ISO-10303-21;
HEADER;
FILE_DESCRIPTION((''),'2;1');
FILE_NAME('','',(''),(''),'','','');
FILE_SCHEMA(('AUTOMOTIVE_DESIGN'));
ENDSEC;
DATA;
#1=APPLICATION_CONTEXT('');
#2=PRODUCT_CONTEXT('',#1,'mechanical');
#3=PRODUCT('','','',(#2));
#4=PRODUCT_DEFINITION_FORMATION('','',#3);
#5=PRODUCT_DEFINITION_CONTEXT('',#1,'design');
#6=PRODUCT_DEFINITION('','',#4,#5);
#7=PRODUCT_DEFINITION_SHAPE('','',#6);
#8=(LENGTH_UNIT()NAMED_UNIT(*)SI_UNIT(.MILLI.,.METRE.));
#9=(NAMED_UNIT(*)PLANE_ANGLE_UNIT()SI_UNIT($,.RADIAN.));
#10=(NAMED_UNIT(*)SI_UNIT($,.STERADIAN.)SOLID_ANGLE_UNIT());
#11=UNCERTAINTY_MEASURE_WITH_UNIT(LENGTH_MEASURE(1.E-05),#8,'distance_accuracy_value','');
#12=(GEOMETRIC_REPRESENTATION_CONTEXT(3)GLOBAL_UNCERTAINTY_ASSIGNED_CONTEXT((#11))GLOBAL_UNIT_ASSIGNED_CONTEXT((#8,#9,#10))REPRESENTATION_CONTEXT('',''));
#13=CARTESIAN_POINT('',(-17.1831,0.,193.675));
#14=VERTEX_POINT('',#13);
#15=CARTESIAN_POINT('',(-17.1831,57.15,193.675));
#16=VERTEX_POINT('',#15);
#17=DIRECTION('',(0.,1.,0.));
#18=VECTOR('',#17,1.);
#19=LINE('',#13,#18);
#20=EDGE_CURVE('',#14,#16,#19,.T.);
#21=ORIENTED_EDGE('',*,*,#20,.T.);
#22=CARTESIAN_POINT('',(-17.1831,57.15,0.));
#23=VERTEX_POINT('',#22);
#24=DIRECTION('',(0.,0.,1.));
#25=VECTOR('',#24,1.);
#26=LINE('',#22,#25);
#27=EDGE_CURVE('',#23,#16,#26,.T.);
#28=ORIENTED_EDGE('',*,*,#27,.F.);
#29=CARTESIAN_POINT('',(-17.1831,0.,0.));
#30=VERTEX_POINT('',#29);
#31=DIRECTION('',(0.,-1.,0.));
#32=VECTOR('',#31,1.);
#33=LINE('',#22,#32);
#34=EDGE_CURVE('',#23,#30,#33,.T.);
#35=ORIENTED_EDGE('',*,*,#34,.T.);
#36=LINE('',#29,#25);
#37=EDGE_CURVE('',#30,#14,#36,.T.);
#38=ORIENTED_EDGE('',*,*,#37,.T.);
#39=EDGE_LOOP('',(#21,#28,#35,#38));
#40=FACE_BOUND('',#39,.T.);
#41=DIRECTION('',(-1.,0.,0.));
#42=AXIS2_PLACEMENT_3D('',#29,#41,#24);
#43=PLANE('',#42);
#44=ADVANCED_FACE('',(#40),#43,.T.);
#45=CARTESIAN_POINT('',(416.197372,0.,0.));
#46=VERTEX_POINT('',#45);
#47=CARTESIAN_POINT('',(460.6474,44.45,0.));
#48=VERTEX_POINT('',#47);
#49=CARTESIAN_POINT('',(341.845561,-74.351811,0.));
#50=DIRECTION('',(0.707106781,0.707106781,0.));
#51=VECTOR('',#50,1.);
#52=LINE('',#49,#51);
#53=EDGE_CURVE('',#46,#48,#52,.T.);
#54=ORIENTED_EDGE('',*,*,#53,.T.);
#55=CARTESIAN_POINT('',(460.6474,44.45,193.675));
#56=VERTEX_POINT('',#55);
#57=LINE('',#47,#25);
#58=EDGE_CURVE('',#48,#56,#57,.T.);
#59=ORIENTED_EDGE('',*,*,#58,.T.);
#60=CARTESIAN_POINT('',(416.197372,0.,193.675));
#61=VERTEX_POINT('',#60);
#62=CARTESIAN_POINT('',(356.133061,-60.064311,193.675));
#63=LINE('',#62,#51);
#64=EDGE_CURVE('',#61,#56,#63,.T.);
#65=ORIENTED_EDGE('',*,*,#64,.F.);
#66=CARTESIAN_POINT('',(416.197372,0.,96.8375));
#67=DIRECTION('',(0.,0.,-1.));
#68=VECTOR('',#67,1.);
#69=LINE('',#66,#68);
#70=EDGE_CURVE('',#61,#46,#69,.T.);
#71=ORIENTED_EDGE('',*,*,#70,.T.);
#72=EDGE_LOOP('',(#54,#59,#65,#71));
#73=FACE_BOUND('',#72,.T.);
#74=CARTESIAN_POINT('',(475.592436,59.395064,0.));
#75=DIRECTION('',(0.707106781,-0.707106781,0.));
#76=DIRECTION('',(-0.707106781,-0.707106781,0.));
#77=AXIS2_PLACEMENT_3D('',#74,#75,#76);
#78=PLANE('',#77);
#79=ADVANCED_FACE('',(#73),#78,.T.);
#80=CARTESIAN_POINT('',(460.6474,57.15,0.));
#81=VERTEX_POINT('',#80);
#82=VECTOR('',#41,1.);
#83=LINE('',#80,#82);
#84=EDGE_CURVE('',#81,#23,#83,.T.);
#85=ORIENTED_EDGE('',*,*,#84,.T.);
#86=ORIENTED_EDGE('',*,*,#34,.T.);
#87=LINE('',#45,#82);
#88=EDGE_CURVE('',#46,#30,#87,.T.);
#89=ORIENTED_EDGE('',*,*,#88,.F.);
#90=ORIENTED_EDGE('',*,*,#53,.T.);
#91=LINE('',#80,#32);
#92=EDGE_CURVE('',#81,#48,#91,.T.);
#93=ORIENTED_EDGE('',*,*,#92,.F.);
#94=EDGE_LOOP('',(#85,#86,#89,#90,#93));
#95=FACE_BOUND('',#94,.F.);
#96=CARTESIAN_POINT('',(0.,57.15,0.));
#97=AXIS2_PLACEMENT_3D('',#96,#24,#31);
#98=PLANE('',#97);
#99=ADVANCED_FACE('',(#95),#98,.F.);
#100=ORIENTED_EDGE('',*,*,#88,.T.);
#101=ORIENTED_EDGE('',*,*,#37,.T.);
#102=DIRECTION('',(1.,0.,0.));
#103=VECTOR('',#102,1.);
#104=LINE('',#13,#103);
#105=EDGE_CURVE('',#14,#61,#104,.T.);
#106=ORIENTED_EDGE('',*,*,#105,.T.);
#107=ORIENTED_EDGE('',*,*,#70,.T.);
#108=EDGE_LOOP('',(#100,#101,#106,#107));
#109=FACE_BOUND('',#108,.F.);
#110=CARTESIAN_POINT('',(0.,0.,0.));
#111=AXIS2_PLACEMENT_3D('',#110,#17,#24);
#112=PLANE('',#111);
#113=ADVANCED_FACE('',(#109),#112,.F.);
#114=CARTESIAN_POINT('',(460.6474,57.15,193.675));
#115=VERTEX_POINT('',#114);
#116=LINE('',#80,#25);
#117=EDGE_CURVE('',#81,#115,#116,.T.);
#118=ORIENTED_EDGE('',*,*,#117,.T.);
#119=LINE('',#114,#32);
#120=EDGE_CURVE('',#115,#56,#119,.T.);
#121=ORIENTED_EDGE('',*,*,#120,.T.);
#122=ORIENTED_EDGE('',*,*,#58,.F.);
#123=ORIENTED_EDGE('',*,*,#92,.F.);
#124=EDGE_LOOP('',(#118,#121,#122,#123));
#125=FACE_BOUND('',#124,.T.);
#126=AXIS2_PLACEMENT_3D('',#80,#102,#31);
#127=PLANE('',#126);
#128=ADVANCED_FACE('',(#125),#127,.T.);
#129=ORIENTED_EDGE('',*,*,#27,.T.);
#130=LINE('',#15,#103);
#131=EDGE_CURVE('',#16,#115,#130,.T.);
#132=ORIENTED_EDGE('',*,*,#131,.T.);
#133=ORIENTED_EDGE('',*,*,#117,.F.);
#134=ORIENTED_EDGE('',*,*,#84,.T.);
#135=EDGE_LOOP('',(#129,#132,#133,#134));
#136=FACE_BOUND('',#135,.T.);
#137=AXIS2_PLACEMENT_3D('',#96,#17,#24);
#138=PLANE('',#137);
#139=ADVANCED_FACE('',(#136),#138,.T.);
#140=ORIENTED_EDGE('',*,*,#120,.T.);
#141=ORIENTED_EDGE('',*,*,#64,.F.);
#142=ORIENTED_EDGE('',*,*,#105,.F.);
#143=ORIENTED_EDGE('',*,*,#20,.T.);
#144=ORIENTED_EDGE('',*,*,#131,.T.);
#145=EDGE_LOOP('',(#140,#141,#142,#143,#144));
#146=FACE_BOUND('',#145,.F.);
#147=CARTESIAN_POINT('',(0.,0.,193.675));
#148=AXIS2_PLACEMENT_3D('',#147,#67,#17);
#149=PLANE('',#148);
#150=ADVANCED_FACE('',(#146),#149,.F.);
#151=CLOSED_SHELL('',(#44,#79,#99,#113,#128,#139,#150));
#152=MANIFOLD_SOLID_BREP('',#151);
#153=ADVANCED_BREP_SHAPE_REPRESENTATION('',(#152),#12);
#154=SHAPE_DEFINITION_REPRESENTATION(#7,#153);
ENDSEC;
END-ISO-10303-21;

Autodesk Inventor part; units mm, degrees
ref_plane "YZ Plane" through (0, 0, 0) normal (1, 0, 0) x (0, 1, 0)
ref_plane "XZ Plane" through (0, 0, 0) normal (0, 1, 0) x (-1, 0, 0)
ref_plane "XY Plane" through (0, 0, 0) normal (0, 0, 1) x (1, 0, 0)
sketch "Sketch1" plane through (0, 0, 0) normal (1, 0, 0) x (0, 1, 0)
  line L0 (0, 0) -> (57.15, 0)
  line L1 (57.15, 0) -> (57.15, 193.675)
  line L2 (57.15, 193.675) -> (0, 193.675)
  line L3 (0, 193.675) -> (0, 0)
  dimension "d0" = 57.15
  dimension "d1" = 193.675
extrude "Extrusion1" add sketch "Sketch1" along normal blind 477.8375
sketch "Sketch3" plane through (0, 0, 0) normal (0, 0, -1) x (-1, 0, 0)
  line L0 (-477.8375, 0) -> (-397.0152, 0) construction
  line L1 (-477.8375, 57.15) -> (-477.8375, 0)
  line L2 (0, 0) -> (-477.8375, 0) projected
  line L3 (-477.8375, 57.15) -> (-420.6875, 0)
  line L4 (-477.8375, 57.15) -> (-477.8375, 0) projected
  line L5 (-477.8375, 0) -> (-420.6875, 0)
extrude "Extrusion3" cut sketch "Sketch3" against normal up to surface (193.675 mm away)
thicken "Thicken1" operation add thickness 3.175 both sides no extend neighbours yes toward (-0.7071068, 0.7071068, 0) faces at (458.7875, 38.1, 129.1167)
sketch "Sketch4" plane through (0, 0, 0) normal (0, 0, -1) x (-1, 0, 0)
  line L0 (0, 57.15) -> (-473.3474, 57.15) projected
  line L1 (-460.6474, 57.15) -> (-460.6474, 44.45)
  line L2 (-473.3474, 57.15) -> (-416.1974, 0) projected
  line L3 (-473.3474, 57.15) -> (-460.6474, 57.15)
  line L4 (-460.6474, 44.45) -> (-473.3474, 57.15)
  point P0 (0, 0)
  dimension "d17" = 12.7
extrude "Extrusion4" cut sketch "Sketch4" against normal blind 193.675
sketch "Sketch6" plane through (0, 0, 0) normal (-1, 0, 0) x (0, 0, 1)
  line L0 (0, 57.15) -> (193.675, 57.15) projected
  line L1 (0, 0) -> (193.675, 0)
  line L2 (193.675, 0) -> (193.675, 57.15)
  line L3 (193.675, 57.15) -> (0, 57.15)
  line L4 (0, 57.15) -> (0, 0)
extrude "Extrusion5" add sketch "Sketch6" along normal blind 17.1831
properties part number "1-80" material "Granite, Cut, Polished"
